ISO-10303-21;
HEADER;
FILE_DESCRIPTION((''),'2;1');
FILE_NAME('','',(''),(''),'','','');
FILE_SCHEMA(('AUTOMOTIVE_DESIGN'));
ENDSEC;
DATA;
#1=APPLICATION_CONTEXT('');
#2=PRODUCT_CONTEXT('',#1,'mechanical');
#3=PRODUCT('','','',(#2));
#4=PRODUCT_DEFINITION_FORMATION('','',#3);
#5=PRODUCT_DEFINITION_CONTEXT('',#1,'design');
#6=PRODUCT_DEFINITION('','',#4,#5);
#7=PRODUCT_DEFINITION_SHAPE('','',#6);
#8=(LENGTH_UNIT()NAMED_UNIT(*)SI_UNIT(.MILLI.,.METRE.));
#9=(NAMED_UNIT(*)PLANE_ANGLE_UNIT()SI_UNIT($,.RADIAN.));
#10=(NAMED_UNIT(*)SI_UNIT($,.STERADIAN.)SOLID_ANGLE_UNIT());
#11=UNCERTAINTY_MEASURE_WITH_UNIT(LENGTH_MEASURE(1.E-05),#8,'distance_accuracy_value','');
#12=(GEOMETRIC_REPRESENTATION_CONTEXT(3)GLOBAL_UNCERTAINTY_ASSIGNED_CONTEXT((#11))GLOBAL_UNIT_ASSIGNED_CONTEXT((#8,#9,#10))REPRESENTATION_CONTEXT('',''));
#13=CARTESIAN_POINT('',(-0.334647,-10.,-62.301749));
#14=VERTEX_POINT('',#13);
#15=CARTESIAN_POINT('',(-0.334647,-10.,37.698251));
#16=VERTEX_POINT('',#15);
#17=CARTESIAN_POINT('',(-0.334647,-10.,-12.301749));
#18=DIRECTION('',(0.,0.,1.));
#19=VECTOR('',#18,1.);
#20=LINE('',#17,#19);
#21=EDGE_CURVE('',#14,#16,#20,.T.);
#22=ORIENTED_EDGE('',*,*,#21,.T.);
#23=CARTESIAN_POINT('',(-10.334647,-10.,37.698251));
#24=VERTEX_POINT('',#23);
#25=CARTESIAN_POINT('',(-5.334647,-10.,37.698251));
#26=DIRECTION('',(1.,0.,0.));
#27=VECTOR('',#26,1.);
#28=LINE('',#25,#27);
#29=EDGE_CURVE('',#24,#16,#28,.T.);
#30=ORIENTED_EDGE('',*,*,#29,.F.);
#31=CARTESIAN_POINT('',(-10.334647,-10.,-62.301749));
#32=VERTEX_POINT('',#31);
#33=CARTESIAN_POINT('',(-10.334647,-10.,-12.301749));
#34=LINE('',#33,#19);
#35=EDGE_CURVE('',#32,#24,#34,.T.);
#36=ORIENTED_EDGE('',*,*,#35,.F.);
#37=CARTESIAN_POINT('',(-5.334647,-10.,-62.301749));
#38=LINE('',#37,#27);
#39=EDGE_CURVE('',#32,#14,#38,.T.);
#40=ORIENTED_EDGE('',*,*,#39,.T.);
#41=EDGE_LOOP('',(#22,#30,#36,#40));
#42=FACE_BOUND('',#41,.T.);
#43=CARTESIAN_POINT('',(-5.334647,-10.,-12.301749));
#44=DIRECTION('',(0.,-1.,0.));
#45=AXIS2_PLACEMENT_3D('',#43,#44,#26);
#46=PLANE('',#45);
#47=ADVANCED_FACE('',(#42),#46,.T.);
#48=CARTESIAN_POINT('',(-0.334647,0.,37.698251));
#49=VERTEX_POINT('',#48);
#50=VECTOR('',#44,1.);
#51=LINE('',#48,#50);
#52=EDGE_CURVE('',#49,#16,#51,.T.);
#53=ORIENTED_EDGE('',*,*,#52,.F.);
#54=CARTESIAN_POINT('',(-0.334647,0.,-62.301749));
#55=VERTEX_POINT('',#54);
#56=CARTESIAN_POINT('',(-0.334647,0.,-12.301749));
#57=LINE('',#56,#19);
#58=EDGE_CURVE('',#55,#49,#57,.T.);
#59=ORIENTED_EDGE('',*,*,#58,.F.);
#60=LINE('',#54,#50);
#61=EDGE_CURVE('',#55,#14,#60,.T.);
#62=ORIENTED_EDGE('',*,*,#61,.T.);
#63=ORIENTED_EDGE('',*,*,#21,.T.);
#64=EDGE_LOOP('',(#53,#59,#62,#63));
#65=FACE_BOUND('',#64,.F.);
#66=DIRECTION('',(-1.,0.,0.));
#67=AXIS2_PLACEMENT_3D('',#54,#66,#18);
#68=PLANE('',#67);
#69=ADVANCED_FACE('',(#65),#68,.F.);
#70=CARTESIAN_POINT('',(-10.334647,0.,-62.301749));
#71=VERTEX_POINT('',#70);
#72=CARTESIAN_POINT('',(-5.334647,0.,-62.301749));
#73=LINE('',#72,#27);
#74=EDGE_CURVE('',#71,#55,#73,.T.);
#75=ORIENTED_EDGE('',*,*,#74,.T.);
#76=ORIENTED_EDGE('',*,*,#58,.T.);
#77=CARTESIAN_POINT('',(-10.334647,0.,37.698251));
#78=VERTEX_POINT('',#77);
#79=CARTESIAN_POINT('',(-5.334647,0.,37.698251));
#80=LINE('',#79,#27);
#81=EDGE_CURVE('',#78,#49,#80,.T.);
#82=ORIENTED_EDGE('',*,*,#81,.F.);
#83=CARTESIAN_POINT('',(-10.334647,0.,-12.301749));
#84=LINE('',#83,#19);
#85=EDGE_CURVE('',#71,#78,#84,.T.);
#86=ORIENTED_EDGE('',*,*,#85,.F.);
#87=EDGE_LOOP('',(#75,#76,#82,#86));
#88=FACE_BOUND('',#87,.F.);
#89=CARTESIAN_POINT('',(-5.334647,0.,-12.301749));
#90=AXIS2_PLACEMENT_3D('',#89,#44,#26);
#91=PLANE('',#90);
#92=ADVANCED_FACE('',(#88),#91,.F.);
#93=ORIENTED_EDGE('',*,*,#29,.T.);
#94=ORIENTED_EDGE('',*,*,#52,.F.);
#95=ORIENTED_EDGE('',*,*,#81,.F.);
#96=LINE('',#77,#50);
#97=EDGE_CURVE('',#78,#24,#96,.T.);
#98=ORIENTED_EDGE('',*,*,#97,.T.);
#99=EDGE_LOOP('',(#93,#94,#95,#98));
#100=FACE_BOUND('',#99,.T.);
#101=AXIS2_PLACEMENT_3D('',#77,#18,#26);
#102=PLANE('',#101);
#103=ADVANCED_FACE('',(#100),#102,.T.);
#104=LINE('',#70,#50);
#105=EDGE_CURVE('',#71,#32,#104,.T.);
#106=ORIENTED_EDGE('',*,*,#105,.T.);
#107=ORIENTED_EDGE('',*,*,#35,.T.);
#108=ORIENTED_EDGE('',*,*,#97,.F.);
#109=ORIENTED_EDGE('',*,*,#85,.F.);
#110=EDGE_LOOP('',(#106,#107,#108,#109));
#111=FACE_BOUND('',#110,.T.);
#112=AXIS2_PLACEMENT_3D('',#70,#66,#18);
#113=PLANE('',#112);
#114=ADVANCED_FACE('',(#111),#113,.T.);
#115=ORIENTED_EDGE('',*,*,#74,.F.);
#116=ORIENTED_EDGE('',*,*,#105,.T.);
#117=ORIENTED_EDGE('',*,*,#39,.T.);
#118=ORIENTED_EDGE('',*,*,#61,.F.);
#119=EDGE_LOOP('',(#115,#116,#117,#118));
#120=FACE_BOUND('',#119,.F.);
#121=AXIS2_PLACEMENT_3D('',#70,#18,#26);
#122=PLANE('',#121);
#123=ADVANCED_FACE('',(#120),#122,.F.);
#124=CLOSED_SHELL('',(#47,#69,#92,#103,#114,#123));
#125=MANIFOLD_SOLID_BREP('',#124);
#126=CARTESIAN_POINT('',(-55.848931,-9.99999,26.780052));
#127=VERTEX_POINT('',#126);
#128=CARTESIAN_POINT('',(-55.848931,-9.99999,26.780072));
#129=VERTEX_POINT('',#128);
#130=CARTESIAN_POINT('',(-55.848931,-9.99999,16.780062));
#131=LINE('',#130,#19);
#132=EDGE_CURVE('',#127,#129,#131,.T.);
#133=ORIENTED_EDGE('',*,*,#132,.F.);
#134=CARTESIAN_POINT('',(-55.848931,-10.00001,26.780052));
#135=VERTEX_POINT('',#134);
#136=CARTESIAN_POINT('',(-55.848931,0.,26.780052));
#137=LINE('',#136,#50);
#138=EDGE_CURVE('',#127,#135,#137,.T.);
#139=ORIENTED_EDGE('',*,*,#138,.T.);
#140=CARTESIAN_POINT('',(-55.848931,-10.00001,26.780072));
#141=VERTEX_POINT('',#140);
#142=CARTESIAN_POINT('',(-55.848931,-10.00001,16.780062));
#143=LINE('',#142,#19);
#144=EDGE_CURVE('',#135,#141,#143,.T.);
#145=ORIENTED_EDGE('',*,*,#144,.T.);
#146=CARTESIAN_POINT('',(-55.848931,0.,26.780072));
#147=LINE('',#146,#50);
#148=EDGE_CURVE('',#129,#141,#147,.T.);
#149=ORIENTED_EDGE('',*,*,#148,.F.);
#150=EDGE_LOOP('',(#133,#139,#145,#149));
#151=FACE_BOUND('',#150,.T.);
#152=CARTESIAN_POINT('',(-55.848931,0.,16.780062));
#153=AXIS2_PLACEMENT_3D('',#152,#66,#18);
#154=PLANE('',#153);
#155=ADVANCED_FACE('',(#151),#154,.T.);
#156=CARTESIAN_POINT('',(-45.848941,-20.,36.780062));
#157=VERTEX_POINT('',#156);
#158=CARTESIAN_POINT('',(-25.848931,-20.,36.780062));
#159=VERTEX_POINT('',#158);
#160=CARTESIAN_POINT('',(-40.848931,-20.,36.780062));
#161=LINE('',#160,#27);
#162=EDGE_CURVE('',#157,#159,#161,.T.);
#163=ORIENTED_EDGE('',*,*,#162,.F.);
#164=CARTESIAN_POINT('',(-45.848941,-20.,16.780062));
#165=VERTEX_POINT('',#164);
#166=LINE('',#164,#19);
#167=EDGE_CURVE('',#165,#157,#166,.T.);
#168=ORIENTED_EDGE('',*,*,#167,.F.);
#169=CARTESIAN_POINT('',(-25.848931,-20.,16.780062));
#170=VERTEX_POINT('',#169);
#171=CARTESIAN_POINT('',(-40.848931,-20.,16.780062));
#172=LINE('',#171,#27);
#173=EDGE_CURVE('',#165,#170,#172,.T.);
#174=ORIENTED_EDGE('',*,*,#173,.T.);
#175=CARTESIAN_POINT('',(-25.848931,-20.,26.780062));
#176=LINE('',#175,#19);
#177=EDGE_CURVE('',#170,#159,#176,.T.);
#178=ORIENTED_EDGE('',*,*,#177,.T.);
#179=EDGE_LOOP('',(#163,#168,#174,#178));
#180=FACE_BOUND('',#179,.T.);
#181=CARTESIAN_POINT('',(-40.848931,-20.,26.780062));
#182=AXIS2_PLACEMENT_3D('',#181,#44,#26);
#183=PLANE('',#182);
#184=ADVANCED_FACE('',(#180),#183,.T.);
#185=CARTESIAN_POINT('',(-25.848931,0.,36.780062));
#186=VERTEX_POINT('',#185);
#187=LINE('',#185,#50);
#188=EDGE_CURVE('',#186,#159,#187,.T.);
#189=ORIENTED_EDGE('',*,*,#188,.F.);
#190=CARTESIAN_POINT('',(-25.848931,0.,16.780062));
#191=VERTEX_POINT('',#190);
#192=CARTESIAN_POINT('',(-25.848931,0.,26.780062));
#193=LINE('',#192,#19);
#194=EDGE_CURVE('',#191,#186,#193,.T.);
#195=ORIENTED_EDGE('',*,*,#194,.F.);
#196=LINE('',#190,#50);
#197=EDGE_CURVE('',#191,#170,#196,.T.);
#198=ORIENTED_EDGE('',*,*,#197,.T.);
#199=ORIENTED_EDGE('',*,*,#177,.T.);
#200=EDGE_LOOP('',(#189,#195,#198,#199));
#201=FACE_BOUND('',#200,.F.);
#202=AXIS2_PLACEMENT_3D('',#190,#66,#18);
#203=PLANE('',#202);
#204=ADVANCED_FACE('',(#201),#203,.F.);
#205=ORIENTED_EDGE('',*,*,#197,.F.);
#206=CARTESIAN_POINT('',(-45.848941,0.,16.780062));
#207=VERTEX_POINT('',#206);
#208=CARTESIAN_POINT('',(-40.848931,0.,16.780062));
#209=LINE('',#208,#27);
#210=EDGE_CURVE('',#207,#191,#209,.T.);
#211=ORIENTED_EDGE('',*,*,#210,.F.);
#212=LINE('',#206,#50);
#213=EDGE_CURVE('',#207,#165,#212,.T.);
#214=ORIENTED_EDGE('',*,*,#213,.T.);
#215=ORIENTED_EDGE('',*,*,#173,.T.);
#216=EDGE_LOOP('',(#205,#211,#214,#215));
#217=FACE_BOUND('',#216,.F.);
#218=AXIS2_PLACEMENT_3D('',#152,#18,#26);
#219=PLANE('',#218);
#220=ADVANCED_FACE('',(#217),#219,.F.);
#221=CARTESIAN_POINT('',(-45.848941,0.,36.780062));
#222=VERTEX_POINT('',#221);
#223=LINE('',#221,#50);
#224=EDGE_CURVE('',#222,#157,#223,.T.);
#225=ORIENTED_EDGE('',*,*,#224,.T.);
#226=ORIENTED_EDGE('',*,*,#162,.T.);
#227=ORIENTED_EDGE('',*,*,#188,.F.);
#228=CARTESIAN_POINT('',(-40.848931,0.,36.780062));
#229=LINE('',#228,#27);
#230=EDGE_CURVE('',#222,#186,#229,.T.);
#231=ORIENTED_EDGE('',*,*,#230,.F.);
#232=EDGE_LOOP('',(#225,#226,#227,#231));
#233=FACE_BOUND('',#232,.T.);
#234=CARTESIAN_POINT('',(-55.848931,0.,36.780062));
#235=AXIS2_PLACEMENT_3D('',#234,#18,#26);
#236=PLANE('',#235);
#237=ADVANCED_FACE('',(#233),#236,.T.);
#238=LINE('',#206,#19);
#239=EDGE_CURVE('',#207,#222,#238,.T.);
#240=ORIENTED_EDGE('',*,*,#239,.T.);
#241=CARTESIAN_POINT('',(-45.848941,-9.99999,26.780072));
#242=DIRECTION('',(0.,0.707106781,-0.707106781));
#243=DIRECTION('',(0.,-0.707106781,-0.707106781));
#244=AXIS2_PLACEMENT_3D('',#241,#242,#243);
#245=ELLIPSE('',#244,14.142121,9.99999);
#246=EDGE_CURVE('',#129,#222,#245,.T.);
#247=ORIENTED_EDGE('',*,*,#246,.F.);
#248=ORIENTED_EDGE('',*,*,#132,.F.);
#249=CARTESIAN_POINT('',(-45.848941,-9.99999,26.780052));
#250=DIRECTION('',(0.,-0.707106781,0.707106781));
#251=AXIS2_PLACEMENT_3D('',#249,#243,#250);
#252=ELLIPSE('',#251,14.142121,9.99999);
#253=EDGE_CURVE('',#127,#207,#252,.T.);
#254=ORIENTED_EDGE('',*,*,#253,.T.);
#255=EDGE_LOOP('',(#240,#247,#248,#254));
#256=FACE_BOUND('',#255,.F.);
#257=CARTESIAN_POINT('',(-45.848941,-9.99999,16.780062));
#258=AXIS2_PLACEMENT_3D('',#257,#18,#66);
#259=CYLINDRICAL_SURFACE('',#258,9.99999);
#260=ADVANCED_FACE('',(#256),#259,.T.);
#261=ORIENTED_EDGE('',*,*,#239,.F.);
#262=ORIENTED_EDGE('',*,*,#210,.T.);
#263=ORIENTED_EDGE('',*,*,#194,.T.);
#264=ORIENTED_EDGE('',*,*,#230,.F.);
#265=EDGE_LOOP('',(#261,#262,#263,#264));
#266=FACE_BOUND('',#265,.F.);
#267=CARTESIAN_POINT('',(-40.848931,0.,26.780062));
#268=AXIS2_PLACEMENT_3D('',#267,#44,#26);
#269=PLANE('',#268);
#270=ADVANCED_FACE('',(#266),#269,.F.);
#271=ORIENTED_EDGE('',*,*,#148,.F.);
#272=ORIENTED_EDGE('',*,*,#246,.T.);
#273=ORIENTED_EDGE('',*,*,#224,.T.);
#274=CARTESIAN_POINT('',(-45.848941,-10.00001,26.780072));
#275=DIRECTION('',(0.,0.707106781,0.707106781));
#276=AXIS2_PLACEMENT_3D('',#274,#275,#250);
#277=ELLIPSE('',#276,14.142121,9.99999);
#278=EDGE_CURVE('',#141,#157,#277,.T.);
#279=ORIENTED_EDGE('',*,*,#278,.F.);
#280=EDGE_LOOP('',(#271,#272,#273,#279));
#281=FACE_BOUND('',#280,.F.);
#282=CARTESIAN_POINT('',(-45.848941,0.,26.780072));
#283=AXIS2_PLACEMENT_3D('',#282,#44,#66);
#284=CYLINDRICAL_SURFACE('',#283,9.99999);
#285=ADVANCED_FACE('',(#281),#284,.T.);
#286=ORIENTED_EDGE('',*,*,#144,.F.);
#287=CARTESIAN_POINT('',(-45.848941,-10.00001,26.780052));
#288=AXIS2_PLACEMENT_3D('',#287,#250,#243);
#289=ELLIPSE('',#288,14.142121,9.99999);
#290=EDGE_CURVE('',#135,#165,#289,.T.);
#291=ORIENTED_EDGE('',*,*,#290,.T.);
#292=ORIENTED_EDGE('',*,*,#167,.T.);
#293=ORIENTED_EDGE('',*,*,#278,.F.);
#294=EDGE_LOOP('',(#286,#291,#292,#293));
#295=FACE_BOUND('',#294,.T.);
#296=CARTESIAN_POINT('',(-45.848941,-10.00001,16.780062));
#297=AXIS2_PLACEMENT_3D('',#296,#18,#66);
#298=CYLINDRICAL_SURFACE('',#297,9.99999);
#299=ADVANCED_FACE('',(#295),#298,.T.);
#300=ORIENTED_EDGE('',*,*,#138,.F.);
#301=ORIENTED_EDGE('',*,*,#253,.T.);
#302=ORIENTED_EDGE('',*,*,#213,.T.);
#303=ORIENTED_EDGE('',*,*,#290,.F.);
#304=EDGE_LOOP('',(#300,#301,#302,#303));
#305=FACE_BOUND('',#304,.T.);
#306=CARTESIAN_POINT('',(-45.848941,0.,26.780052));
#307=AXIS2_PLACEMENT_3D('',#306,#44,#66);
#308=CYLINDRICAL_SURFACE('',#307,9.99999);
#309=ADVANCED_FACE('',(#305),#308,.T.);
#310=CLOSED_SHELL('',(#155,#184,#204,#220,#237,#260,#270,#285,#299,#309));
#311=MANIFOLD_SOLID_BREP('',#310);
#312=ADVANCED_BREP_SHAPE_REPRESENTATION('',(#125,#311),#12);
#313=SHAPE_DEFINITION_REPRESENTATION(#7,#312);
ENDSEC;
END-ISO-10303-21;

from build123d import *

# Parameters (mm, degrees)
F0_W     = 10
F0_H     = 100
F1_DEPTH = 10
F2_W     = 30
F2_H     = 20
F3_DEPTH = 20
F4_R     = 9.99999


# Not quite as in the source:
# - a fillet or chamfer is up to 0.001 mm smaller than in the source, because OpenCascade refuses the exact size


with BuildPart() as f1:
    # F0 (on Front) → F1 (new body)
    with BuildSketch(Plane.XZ):
        with Locations((-5.3346473165, -12.30174932)):
            Rectangle(F0_W, F0_H)
    extrude(amount=F1_DEPTH)


with BuildPart() as f3:
    # F2 (on Front) → F3 (new body)
    with BuildSketch(Plane.XZ):
        with Locations((-40.8489312977, 26.7800622059)):
            Rectangle(F2_W, F2_H)
    extrude(amount=F3_DEPTH)

    # F4 (radius 10 in the source; OpenCascade refuses exactly that, so slightly less here)
    f4_edges = [f3.edges().sort_by_distance(p)[0] for p in [
        (-55.848931, -10, 36.780062),
        (-55.848931, -10, 16.780062),
        (-55.848931, 0, 26.780062),
        (-55.848931, -20, 26.780062),
    ]]
    fillet(f4_edges, radius=F4_R)


solid = Compound([f1.part, f3.part])
